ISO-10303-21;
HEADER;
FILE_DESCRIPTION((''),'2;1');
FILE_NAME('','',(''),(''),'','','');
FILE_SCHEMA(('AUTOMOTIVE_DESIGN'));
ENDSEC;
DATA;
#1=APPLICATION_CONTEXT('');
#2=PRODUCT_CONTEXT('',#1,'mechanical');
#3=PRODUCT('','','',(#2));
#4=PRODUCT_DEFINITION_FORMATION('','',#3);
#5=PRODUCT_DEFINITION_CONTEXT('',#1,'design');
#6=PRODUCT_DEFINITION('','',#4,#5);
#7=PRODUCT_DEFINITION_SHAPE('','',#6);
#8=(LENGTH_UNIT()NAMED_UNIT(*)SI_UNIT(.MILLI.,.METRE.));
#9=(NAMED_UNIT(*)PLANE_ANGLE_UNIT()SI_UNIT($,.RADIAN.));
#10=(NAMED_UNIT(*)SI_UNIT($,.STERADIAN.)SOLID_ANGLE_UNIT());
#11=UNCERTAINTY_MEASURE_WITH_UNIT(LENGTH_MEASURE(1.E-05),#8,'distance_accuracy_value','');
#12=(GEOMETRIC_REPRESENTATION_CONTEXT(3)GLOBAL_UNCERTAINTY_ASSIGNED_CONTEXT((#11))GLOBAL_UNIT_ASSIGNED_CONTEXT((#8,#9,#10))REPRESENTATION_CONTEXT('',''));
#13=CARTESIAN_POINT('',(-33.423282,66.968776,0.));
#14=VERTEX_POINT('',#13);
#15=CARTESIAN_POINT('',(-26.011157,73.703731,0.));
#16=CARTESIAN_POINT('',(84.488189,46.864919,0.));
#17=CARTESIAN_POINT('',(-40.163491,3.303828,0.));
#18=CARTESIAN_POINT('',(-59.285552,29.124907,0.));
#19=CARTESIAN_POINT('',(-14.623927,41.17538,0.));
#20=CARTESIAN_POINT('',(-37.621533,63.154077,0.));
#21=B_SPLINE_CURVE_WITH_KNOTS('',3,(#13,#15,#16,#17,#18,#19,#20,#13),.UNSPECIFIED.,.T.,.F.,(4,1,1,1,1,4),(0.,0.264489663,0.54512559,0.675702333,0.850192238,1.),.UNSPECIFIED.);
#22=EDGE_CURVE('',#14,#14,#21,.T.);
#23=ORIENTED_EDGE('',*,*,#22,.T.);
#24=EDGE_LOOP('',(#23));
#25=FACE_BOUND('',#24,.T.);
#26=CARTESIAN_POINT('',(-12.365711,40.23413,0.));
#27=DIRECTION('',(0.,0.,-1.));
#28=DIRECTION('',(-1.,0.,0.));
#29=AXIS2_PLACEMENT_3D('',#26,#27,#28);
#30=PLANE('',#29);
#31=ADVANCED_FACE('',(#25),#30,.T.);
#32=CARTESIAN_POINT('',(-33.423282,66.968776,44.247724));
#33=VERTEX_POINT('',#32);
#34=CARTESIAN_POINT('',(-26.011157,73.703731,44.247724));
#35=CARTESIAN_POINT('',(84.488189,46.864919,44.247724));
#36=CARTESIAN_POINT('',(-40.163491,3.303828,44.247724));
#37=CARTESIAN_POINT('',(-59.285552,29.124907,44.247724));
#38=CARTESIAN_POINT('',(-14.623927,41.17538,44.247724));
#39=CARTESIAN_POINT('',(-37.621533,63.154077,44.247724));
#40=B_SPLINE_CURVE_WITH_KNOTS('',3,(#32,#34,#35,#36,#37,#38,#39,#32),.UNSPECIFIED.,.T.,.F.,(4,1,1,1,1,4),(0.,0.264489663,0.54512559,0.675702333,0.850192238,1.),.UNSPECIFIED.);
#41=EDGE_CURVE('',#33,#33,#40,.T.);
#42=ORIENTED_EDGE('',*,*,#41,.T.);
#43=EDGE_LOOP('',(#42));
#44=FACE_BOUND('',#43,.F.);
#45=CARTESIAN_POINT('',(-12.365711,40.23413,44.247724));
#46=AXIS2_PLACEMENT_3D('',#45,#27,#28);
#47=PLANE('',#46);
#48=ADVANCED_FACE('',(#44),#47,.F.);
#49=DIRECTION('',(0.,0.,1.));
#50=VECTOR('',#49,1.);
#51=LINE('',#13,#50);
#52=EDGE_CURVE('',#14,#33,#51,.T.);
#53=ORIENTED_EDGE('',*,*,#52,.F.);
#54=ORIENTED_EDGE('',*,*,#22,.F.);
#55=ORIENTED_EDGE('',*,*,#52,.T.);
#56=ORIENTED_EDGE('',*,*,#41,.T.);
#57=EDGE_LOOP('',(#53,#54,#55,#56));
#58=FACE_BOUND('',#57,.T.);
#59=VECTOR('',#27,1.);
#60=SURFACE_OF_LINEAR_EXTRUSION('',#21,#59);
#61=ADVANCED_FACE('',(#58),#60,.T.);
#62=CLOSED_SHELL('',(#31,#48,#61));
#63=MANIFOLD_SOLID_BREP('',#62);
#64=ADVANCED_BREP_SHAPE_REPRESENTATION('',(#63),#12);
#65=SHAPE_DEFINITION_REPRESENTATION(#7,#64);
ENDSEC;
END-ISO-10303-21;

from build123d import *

# Parameters (mm, degrees)
F1_DEPTH = 44.2477241158


# Not quite as in the source:
# - the program builds the solid bodies; features that only make, move or delete a surface that nothing else refers to are left out


with BuildPart() as f1:
    # F0 (on Top) → F1 (new body)
    with BuildSketch(Plane.XY):
        with BuildLine():
            add(Edge.make_bspline(
                [(-33.4232822061, 66.9687762856), (-26.0111572837, 73.7037310164), (84.4881890479, 46.8649190871), (-40.1634909903, 3.3038282964), (-59.285551706, 29.124907217), (-14.6239266757, 41.1753797496), (-37.6215326499, 63.1540771294), (-33.4232822061, 66.9687762856)],
                knots=[0, 0, 0, 0, 0.2644896632, 0.5451255897, 0.6757023333, 0.8501922381, 1, 1, 1, 1], degree=3))
        make_face()
    extrude(amount=F1_DEPTH)


solid = f1.part
